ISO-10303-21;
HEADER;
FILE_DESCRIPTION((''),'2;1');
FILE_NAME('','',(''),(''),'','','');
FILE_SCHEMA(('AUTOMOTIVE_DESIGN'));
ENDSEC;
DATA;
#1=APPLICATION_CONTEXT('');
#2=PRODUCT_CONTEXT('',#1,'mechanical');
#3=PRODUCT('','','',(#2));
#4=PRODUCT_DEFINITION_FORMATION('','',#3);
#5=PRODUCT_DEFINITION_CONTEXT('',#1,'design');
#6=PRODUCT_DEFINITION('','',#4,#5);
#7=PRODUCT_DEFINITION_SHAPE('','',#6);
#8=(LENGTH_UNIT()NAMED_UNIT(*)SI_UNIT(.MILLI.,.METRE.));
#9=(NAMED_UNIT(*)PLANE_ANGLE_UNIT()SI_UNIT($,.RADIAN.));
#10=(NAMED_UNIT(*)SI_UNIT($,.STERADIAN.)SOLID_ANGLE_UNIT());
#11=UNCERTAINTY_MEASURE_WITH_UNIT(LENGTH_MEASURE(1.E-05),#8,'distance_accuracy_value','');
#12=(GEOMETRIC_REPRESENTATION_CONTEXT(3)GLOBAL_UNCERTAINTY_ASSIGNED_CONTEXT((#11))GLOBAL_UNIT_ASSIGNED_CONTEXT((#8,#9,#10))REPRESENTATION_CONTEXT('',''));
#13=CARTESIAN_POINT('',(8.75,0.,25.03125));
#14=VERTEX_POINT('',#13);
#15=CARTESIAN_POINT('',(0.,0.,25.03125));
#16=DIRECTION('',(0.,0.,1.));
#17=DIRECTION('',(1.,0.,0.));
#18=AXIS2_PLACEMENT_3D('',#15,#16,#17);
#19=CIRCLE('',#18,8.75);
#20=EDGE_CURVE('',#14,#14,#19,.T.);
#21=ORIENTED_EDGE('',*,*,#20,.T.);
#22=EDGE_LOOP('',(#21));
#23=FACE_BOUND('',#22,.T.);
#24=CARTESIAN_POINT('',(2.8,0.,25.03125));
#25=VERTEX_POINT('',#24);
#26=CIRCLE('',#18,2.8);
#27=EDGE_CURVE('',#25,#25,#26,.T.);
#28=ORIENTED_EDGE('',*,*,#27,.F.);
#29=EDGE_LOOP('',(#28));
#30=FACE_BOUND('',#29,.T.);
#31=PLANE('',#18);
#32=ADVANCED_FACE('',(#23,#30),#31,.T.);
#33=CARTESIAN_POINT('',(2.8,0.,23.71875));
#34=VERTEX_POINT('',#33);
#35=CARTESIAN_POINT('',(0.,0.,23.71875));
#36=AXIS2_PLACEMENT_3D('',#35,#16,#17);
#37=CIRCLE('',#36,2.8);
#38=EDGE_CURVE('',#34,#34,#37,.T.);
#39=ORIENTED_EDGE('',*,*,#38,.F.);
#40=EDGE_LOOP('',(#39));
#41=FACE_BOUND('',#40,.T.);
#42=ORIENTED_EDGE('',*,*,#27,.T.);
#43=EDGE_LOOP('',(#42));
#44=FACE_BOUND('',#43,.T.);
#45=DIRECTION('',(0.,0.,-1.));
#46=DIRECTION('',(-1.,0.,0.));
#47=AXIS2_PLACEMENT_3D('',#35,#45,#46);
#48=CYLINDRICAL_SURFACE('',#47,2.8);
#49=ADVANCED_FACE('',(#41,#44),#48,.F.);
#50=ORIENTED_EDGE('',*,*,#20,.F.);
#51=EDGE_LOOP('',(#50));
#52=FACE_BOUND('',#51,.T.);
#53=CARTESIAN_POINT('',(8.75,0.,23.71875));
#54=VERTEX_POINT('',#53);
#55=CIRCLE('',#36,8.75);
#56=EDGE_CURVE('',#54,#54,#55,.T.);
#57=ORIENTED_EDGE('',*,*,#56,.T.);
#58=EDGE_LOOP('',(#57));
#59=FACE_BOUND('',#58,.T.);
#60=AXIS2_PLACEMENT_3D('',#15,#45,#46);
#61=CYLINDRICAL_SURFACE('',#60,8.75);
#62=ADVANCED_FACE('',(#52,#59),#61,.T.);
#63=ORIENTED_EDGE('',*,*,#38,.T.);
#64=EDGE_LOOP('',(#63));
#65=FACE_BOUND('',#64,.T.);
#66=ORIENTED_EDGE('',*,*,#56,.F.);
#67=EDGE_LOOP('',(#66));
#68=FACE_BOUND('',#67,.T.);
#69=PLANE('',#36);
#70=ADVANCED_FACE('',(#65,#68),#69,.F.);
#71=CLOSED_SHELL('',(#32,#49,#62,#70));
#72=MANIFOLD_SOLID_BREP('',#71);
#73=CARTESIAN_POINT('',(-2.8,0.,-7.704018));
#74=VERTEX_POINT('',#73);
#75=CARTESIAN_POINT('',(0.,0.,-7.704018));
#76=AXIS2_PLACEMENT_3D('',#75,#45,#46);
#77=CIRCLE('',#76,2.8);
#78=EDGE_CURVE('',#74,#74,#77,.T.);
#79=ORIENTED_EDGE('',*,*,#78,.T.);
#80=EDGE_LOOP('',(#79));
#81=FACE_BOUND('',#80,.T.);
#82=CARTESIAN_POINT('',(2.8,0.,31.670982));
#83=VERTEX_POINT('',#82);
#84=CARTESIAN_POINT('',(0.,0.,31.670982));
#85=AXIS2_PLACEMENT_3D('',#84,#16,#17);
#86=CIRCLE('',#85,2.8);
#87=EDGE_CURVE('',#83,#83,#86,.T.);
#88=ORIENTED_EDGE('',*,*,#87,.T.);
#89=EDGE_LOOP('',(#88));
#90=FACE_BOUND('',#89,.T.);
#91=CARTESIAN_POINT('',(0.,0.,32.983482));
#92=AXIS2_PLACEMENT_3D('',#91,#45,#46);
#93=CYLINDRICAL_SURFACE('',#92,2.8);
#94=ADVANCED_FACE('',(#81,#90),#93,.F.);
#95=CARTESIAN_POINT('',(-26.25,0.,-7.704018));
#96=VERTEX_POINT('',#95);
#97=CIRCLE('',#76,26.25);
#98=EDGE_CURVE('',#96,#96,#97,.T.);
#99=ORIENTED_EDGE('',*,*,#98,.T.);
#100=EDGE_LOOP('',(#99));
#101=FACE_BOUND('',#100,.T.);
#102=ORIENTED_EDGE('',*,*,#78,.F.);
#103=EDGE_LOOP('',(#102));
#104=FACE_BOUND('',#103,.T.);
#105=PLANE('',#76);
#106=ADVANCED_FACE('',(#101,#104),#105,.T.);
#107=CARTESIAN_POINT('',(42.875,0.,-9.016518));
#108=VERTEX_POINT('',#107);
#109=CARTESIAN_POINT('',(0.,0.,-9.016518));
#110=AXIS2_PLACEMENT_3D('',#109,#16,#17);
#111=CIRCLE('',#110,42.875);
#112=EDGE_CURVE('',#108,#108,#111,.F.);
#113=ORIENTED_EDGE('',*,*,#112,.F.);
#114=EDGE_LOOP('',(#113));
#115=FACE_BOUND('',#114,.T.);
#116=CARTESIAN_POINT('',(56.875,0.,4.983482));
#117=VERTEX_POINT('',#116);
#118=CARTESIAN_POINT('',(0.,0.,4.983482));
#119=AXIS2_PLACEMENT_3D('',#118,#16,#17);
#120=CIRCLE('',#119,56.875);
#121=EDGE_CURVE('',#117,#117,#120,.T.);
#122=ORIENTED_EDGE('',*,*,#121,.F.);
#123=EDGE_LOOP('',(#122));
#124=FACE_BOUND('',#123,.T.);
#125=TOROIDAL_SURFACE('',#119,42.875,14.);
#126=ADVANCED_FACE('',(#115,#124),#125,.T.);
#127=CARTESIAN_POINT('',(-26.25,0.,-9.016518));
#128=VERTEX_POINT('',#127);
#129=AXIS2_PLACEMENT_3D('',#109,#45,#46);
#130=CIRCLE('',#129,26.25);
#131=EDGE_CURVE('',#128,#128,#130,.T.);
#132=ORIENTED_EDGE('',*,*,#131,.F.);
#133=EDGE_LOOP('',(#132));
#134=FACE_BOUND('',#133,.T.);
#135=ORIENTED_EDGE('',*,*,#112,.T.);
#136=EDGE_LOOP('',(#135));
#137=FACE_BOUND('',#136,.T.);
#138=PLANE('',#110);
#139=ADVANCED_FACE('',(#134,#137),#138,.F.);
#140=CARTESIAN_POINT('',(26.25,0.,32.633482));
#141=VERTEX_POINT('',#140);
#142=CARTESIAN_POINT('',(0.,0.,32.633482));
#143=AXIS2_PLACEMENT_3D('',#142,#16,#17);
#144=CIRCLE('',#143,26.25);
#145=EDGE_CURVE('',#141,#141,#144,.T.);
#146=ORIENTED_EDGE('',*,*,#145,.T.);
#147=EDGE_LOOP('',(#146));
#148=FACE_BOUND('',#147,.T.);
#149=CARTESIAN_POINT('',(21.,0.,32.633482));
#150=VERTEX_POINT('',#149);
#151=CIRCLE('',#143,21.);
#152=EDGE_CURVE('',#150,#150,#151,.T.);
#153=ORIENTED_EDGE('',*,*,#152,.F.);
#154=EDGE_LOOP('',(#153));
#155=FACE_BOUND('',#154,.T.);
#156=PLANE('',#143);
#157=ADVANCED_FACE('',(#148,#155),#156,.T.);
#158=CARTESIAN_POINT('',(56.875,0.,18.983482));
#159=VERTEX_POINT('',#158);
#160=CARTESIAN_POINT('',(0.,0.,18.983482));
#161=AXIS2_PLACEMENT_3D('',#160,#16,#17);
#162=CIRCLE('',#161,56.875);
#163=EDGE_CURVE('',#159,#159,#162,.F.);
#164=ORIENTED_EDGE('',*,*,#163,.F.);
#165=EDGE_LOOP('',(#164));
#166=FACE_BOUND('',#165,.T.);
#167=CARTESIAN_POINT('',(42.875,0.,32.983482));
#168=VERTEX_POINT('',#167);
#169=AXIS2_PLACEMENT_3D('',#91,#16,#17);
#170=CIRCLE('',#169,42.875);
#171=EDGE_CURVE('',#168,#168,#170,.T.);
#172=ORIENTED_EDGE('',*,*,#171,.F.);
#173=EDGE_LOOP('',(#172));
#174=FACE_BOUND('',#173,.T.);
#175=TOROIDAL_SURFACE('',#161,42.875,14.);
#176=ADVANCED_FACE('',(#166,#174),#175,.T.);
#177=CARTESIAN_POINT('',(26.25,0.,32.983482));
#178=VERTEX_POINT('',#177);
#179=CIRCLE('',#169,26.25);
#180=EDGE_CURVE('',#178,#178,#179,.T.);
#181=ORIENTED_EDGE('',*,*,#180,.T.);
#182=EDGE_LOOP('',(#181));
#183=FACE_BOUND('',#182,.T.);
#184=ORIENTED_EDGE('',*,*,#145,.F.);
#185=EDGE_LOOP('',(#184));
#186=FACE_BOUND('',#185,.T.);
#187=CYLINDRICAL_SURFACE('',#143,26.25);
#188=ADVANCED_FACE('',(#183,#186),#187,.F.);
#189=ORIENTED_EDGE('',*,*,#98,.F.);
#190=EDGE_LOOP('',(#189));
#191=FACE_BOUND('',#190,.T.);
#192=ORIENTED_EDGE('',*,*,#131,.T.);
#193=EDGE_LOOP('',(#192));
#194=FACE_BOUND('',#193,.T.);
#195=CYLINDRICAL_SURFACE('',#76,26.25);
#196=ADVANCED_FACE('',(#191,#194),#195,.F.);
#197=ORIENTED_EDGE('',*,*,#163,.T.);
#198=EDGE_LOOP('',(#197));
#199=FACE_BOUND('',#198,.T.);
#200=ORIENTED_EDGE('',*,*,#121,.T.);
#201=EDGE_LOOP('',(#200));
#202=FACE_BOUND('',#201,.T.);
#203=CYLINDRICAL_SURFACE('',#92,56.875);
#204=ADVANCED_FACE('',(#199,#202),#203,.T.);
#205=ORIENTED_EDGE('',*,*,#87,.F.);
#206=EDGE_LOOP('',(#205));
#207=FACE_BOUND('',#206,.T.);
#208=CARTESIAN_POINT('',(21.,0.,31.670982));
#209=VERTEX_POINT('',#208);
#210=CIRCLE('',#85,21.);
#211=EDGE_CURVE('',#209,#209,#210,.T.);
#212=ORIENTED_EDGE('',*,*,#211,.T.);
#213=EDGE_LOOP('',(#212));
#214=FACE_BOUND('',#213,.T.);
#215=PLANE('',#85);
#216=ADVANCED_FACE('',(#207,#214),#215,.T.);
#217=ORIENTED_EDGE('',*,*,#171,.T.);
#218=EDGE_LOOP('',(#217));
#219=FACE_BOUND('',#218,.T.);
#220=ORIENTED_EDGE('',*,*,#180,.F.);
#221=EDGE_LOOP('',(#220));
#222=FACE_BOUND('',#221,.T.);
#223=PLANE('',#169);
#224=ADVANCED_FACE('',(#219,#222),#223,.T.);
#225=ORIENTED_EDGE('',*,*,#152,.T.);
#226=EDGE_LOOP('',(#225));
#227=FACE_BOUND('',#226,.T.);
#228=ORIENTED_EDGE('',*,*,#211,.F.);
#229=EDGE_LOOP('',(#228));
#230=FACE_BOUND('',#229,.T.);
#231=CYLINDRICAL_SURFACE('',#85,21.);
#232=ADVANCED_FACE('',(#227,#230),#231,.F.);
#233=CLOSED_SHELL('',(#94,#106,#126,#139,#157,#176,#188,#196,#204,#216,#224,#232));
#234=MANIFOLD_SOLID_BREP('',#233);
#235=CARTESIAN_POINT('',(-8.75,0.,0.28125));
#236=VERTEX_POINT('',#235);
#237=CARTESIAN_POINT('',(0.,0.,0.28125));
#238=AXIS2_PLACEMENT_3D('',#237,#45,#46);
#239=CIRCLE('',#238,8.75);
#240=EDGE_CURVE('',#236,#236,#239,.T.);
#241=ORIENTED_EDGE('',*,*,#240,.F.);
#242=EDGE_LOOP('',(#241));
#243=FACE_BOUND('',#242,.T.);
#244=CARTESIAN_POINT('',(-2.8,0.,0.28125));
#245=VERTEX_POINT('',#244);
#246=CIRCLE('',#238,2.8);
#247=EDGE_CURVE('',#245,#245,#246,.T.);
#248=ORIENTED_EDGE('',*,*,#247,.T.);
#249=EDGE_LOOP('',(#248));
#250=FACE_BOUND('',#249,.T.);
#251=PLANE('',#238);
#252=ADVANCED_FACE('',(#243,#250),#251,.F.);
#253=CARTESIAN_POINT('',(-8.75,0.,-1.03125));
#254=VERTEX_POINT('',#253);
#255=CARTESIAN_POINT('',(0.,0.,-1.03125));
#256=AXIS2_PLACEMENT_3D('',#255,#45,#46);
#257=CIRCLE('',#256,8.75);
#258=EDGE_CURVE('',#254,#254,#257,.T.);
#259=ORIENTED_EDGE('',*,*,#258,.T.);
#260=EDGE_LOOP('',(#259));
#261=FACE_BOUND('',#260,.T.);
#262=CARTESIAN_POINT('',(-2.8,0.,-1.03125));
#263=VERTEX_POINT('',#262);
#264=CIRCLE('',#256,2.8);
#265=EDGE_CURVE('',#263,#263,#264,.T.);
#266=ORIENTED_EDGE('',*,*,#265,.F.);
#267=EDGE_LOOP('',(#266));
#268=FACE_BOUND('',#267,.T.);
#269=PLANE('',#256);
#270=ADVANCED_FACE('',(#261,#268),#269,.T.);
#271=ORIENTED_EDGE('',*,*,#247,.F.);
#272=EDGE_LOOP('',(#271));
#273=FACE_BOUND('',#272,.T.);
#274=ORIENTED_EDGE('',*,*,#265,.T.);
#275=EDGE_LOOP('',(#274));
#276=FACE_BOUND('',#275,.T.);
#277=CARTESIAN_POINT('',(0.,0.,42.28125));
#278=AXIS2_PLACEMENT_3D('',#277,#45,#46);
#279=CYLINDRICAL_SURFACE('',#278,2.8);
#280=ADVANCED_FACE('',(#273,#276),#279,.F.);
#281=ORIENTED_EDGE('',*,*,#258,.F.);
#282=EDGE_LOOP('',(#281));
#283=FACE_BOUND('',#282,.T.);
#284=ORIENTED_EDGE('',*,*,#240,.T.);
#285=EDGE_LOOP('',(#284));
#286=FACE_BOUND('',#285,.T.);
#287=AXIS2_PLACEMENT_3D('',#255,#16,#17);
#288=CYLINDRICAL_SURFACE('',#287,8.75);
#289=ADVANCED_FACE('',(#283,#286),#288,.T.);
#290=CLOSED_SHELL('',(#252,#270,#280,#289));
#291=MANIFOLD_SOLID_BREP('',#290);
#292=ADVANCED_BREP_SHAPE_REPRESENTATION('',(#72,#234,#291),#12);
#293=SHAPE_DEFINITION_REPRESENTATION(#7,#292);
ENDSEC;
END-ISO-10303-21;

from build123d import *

# Parameters (mm, degrees)
SKETCH1_R            = 32.5
SKETCH1_R_2          = 1.6
BOSS_EXTRUDE1_DEPTH  = 24
FILLET2_R            = 8
SKETCH3_R            = 5
BOSS_EXTRUDE2_DEPTH  = 0.75
BOSS_EXTRUDE3_START  = 0.75
SKETCH4_R            = 5
BOSS_EXTRUDE3_DEPTH  = 0.75
SKETCH5_R            = 1.6
CUT_EXTRUDE1_DEPTH   = 40.75
SKETCH6_R            = 15
SKETCH6_R_2          = 12
CUT_EXTRUDE3_DEPTH   = 0.2
CUT_EXTRUDE5_START   = -0.75
SKETCH9_R            = 12
CUT_EXTRUDE5_DEPTH   = 0.75
SKETCH11_R           = 12
CUT_EXTRUDE6_DEPTH   = 0.75
SKETCH12_R           = 15
SKETCH12_R_2         = 12
CUT_EXTRUDE7_DEPTH   = 0.75
SCALE1_START         = 24
SCALE1_OUTLINE_R     = 2.8
SCALE1_OUTLINE_R_2   = 1.6
SCALE1_DEPTH         = 0.75
SCALE1_START_2       = 23.71875
SCALE1_2_OUTLINE_R   = 8.75
SCALE1_2_OUTLINE_R_2 = 2.8
SCALE1_2_DEPTH       = 1.3125
SCALE1_3_OUTLINE_W   = 1.2
SCALE1_3_OUTLINE_H   = 22.5
SCALE1_START_3       = -0.75
SCALE1_5_OUTLINE_R   = 2.8
SCALE1_5_OUTLINE_R_2 = 1.6
SCALE1_5_DEPTH       = 0.75
SCALE1_START_4       = -1.03125
SCALE1_6_OUTLINE_R   = 8.75
SCALE1_6_OUTLINE_R_2 = 2.8
SCALE1_6_DEPTH       = 1.3125


# Read off the part's stored shape, not the designer's step: Scale1
with BuildPart() as part:
    # Sketch1 → Boss-Extrude1 (new body)
    with BuildSketch(Plane.XY):
        Circle(SKETCH1_R)
        Circle(SKETCH1_R_2, mode=Mode.SUBTRACT)
    extrude(amount=BOSS_EXTRUDE1_DEPTH)

    # Fillet2
    fillet2_edges = [part.edges().sort_by_distance(p)[0] for p in [
        (-32.5, 0, 0),
        (-32.5, 0, 24),
    ]]
    fillet(fillet2_edges, radius=FILLET2_R)

    # Sketch3 → Boss-Extrude2 (add)
    with BuildSketch(Plane.XY.offset(24)):
        Circle(SKETCH3_R)
    extrude(amount=BOSS_EXTRUDE2_DEPTH)

    # Sketch4 → Boss-Extrude3 (add)
    with BuildSketch(Plane(origin=(0, 0, 0), x_dir=(-1, 0, 0), z_dir=(0, 0, -1)).offset(BOSS_EXTRUDE3_START)):
        with Locations(Location((0, 0, 0), (0, 0, 180))):
            Circle(SKETCH4_R)
    extrude(amount=-BOSS_EXTRUDE3_DEPTH)

    # Sketch5 → Cut-Extrude1 (cut)
    with BuildSketch(Plane(origin=(0, 0, -0.75), x_dir=(-1, 0, 0), z_dir=(0, 0, -1))):
        Circle(SKETCH5_R)
    extrude(amount=-CUT_EXTRUDE1_DEPTH, mode=Mode.SUBTRACT)

    # Sketch6 → Cut-Extrude3 (cut)
    with BuildSketch(Plane.XY.offset(24)):
        Circle(SKETCH6_R)
        Circle(SKETCH6_R_2, mode=Mode.SUBTRACT)
    extrude(amount=-CUT_EXTRUDE3_DEPTH, mode=Mode.SUBTRACT)

    # Sketch9 → Cut-Extrude5 (cut)
    with BuildSketch(Plane(origin=(0, 0, 0), x_dir=(-1, 0, 0), z_dir=(0, 0, -1)).offset(CUT_EXTRUDE5_START)):
        with Locations(Location((0, 0, 0), (0, 0, 180))):
            Circle(SKETCH9_R)
    extrude(amount=CUT_EXTRUDE5_DEPTH, mode=Mode.SUBTRACT)


with BuildPart() as cut_extrude5_piece_1:
    # of the separate pieces the step leaves, piece 1, a body of its own (cut_extrude5_pieces)
    add(part.part.solids().sort_by_distance((32.5, 0, 8))[0])

    # Sketch11 → Cut-Extrude6 (cut)
    with BuildSketch(Plane.XY.offset(24)):
        with Locations(Location((0, 0, 0), (0, 0, 180))):
            Circle(SKETCH11_R)
    extrude(amount=-CUT_EXTRUDE6_DEPTH, mode=Mode.SUBTRACT)


with BuildPart() as cut_extrude5_piece_2:
    # of the separate pieces the step leaves, piece 2, a body of its own (cut_extrude5_pieces)
    add(part.part.solids().sort_by_distance((5, 0, -0.75))[0])

    # Scale1 5 outline → Scale1 5 (cut)
    with BuildSketch(Plane.XY.offset(SCALE1_START_3)):
        Circle(SCALE1_5_OUTLINE_R)
        Circle(SCALE1_5_OUTLINE_R_2, mode=Mode.SUBTRACT)
    extrude(amount=SCALE1_5_DEPTH, mode=Mode.SUBTRACT)

    # Scale1 6 outline → Scale1 6 (add)
    with BuildSketch(Plane.XY.offset(SCALE1_START_4)):
        Circle(SCALE1_6_OUTLINE_R)
        Circle(SCALE1_6_OUTLINE_R_2, mode=Mode.SUBTRACT)
    extrude(amount=SCALE1_6_DEPTH)


with BuildPart() as cut_extrude6_piece_1:
    # of the separate pieces the step leaves, piece 1, a body of its own (cut_extrude6_pieces)
    add(cut_extrude5_piece_1.part.solids().sort_by_distance((32.5, 0, 8))[0])

    # Sketch12 → Cut-Extrude7 (cut)
    with BuildSketch(Plane(origin=(0, 0, 0), x_dir=(-1, 0, 0), z_dir=(0, 0, -1))):
        with Locations(Location((0, 0, 0), (0, 0, 180))):
            Circle(SKETCH12_R)
        with Locations(Location((0, 0, 0), (0, 0, 180))):
            Circle(SKETCH12_R_2, mode=Mode.SUBTRACT)
    extrude(amount=-CUT_EXTRUDE7_DEPTH, mode=Mode.SUBTRACT)

    # Scale1 3 outline → Scale1 3 (revolve, cut)
    with BuildSketch(Plane.XZ):
        with Locations((2.2, 12)):
            Rectangle(SCALE1_3_OUTLINE_W, SCALE1_3_OUTLINE_H)
    revolve(axis=Axis((0, 0, 0), (0, 0, 1)), mode=Mode.SUBTRACT)

    # Scale1 4 outline → Scale1 4 (revolve)
    with BuildSketch(Plane.XZ):
        with BuildLine():
            Line((2.8, 31.670981604), (2.8, 23.25))
            Line((2.8, 23.25), (12, 23.25))
            Line((12, 23.25), (12, 23.8))
            Line((12, 23.8), (15, 23.8))
            Line((15, 23.8), (15, 24))
            Line((15, 24), (24.5, 24))
            ThreePointArc((24.5, 24), (30.156854249, 21.656854249), (32.5, 16))
            Line((32.5, 16), (32.5, 8))
            ThreePointArc((32.5, 8), (30.156854249, 2.343145751), (24.5, 0))
            Line((24.5, 0), (15, 0))
            Line((15, 0), (15, 0.75))
            Line((15, 0.75), (2.8, 0.75))
            Line((2.8, 0.75), (2.8, -7.704018396))
            Line((2.8, -7.704018396), (26.25, -7.704018396))
            Line((26.25, -7.704018396), (26.25, -9.016518396))
            Line((26.25, -9.016518396), (42.875, -9.016518396))
            ThreePointArc((42.875, -9.016518396), (52.774494937, -4.916013333), (56.875, 4.983481604))
            Line((56.875, 4.983481604), (56.875, 18.983481604))
            ThreePointArc((56.875, 18.983481604), (52.774494937, 28.882976541), (42.875, 32.983481604))
            Line((42.875, 32.983481604), (26.25, 32.983481604))
            Line((26.25, 32.983481604), (26.25, 32.633481604))
            Line((26.25, 32.633481604), (21, 32.633481604))
            Line((21, 32.633481604), (21, 31.670981604))
            Line((21, 31.670981604), (2.8, 31.670981604))
        make_face()
    revolve(axis=Axis((0, 0, 0), (0, 0, 1)))


with BuildPart() as cut_extrude6_piece_2:
    # of the separate pieces the step leaves, piece 2, a body of its own (cut_extrude6_pieces)
    add(cut_extrude5_piece_1.part.solids().sort_by_distance((-1.6, 0, 24))[0])

    # Scale1 outline → Scale1 (cut)
    with BuildSketch(Plane.XY.offset(SCALE1_START)):
        Circle(SCALE1_OUTLINE_R)
        Circle(SCALE1_OUTLINE_R_2, mode=Mode.SUBTRACT)
    extrude(amount=SCALE1_DEPTH, mode=Mode.SUBTRACT)

    # Scale1 2 outline → Scale1 2 (add)
    with BuildSketch(Plane.XY.offset(SCALE1_START_2)):
        Circle(SCALE1_2_OUTLINE_R)
        Circle(SCALE1_2_OUTLINE_R_2, mode=Mode.SUBTRACT)
    extrude(amount=SCALE1_2_DEPTH)


solid = Compound([cut_extrude5_piece_2.part, cut_extrude6_piece_1.part, cut_extrude6_piece_2.part])
